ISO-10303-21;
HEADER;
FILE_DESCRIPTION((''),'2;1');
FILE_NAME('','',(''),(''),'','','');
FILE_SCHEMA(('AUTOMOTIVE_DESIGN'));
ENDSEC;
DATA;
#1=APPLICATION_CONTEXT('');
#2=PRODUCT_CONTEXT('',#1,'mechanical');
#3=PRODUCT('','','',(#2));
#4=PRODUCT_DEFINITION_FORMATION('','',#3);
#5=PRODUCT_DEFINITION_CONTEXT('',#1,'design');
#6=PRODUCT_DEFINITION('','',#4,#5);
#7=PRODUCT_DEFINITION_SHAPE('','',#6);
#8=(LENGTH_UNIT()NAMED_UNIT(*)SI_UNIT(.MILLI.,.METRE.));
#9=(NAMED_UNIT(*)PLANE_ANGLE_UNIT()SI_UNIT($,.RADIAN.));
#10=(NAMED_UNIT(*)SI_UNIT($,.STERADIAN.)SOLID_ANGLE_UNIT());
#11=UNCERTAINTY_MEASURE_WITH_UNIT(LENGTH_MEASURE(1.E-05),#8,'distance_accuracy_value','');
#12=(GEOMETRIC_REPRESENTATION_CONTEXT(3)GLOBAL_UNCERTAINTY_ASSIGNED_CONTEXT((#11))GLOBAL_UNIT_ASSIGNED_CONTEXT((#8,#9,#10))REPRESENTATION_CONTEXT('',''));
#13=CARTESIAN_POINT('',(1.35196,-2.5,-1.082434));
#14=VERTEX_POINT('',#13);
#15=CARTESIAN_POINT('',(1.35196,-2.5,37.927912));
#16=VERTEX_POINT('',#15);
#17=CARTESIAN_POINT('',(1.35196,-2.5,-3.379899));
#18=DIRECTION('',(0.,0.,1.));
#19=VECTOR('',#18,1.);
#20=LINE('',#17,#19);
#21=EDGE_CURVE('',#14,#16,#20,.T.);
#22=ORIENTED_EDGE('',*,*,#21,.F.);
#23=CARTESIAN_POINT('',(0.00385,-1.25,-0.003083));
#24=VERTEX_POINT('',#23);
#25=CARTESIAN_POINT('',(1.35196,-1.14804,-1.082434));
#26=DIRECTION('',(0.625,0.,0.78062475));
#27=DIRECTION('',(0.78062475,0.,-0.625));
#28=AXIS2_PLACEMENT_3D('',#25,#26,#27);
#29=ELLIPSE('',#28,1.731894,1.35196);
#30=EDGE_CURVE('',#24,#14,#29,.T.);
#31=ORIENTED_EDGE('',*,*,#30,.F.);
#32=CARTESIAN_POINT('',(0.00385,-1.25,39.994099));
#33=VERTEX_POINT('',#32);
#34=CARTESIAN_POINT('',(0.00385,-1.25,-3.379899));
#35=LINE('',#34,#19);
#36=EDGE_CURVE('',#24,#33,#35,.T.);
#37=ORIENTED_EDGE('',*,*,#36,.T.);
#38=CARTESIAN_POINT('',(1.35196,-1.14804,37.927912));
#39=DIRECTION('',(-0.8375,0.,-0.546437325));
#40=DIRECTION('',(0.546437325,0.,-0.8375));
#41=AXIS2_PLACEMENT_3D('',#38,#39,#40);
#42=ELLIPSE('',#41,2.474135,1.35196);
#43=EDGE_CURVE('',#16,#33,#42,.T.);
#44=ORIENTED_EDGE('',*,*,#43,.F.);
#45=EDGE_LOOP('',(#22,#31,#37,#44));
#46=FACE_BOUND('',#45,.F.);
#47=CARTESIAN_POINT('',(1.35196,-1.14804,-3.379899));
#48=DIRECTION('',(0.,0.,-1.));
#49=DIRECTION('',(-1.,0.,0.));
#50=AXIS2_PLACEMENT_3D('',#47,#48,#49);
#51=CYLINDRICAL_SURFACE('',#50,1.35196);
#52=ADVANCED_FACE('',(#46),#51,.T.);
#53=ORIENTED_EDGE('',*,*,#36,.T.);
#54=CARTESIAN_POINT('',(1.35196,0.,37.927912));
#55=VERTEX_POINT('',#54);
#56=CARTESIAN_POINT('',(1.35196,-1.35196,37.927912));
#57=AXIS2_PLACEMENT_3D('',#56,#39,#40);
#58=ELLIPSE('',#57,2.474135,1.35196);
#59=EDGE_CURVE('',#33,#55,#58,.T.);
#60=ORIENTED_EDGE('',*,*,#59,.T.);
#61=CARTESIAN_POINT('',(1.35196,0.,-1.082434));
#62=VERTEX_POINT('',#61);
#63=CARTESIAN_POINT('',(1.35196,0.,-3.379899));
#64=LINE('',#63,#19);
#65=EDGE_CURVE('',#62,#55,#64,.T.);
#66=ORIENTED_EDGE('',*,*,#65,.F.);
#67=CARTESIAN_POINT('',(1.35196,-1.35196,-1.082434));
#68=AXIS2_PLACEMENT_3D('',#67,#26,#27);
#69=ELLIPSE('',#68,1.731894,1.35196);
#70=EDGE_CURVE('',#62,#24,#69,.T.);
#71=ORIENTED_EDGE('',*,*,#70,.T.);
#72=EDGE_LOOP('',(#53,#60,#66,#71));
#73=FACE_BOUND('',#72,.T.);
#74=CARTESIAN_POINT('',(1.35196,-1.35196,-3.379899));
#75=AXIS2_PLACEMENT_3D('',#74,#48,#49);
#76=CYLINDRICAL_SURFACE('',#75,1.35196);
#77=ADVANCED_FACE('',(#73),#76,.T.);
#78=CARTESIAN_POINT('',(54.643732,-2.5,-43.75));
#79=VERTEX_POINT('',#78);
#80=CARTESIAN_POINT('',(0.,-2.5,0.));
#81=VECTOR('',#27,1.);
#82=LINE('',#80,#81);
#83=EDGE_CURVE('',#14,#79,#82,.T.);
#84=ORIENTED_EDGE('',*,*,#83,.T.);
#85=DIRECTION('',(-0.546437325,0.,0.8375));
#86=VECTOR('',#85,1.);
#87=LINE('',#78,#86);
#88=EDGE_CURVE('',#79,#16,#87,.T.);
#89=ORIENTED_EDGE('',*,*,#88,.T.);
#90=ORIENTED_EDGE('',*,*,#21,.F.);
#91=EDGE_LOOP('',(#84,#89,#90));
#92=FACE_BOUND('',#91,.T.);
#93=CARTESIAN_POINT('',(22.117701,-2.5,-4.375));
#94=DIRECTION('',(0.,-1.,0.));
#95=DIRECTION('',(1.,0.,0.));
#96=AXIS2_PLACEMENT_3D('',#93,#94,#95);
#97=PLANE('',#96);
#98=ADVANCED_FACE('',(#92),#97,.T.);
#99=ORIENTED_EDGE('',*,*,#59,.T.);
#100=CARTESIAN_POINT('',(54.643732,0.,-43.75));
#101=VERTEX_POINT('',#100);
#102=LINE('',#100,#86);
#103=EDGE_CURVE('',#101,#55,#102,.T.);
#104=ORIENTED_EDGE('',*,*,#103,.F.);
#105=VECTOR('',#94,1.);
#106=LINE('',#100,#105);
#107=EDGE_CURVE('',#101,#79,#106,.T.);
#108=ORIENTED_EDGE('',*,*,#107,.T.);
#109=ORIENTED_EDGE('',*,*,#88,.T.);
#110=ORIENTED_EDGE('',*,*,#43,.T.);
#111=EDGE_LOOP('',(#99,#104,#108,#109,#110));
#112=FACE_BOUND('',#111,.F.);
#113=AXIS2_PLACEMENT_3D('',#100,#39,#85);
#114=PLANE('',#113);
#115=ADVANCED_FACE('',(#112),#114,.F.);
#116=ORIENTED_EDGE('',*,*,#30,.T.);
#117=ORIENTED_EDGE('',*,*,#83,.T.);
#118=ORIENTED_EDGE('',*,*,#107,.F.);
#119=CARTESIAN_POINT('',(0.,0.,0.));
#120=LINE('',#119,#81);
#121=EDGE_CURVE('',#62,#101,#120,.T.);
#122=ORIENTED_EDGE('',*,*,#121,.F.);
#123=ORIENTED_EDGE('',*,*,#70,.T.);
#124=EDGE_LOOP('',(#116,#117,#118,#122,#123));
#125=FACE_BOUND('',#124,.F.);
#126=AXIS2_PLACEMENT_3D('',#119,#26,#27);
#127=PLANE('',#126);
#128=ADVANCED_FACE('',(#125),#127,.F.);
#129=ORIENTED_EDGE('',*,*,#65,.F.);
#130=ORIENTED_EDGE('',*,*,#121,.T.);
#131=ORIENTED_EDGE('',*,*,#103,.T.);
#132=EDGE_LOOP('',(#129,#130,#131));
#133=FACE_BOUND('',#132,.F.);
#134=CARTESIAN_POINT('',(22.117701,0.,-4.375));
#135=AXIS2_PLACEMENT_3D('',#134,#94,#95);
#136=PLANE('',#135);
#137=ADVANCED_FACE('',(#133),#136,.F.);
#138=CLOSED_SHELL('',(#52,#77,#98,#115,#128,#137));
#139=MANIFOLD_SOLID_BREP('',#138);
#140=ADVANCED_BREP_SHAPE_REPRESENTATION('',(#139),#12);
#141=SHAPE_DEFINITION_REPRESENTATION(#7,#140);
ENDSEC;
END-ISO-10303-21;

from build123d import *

# Parameters (mm, degrees)
F1_DEPTH    = 2.5
F2_T1_DEPTH = 46.7597979746


# Not quite as in the source:
# - a fillet or chamfer that OpenCascade refuses, or shapes differently, is made with other operations: its cross-section is extruded or revolved along the edge and cut away or added


with BuildPart() as f1:
    # F0 (on Front) → F1 (new body)
    with BuildSketch(Plane.XZ):
        Polygon((0, 40), (0, 0), (54.643732486, -43.75), align=None)
    extrude(amount=F1_DEPTH)

    # F2: fillet of radius 1.3519595949 on 2 edges, made by hand

    # F2_s2 → F2_t1 (cut)
    with BuildSketch(Plane.XY.offset(-3.3798989873)):
        with BuildLine():
            ThreePointArc((0, -1.1480404051), (0.3959797975, -2.1040202025), (1.3519595949, -2.5))
            Line((1.3519595949, -2.5), (0, -2.5))
            Line((0, -2.5), (0, -1.1480404051))
        make_face()
        with BuildLine():
            ThreePointArc((0, -1.3519595949), (0.3959797975, -0.3959797975), (1.3519595949, 0))
            Line((1.3519595949, 0), (0, 0))
            Line((0, 0), (0, -1.3519595949))
        make_face()
    extrude(amount=F2_T1_DEPTH, mode=Mode.SUBTRACT)


solid = f1.part
